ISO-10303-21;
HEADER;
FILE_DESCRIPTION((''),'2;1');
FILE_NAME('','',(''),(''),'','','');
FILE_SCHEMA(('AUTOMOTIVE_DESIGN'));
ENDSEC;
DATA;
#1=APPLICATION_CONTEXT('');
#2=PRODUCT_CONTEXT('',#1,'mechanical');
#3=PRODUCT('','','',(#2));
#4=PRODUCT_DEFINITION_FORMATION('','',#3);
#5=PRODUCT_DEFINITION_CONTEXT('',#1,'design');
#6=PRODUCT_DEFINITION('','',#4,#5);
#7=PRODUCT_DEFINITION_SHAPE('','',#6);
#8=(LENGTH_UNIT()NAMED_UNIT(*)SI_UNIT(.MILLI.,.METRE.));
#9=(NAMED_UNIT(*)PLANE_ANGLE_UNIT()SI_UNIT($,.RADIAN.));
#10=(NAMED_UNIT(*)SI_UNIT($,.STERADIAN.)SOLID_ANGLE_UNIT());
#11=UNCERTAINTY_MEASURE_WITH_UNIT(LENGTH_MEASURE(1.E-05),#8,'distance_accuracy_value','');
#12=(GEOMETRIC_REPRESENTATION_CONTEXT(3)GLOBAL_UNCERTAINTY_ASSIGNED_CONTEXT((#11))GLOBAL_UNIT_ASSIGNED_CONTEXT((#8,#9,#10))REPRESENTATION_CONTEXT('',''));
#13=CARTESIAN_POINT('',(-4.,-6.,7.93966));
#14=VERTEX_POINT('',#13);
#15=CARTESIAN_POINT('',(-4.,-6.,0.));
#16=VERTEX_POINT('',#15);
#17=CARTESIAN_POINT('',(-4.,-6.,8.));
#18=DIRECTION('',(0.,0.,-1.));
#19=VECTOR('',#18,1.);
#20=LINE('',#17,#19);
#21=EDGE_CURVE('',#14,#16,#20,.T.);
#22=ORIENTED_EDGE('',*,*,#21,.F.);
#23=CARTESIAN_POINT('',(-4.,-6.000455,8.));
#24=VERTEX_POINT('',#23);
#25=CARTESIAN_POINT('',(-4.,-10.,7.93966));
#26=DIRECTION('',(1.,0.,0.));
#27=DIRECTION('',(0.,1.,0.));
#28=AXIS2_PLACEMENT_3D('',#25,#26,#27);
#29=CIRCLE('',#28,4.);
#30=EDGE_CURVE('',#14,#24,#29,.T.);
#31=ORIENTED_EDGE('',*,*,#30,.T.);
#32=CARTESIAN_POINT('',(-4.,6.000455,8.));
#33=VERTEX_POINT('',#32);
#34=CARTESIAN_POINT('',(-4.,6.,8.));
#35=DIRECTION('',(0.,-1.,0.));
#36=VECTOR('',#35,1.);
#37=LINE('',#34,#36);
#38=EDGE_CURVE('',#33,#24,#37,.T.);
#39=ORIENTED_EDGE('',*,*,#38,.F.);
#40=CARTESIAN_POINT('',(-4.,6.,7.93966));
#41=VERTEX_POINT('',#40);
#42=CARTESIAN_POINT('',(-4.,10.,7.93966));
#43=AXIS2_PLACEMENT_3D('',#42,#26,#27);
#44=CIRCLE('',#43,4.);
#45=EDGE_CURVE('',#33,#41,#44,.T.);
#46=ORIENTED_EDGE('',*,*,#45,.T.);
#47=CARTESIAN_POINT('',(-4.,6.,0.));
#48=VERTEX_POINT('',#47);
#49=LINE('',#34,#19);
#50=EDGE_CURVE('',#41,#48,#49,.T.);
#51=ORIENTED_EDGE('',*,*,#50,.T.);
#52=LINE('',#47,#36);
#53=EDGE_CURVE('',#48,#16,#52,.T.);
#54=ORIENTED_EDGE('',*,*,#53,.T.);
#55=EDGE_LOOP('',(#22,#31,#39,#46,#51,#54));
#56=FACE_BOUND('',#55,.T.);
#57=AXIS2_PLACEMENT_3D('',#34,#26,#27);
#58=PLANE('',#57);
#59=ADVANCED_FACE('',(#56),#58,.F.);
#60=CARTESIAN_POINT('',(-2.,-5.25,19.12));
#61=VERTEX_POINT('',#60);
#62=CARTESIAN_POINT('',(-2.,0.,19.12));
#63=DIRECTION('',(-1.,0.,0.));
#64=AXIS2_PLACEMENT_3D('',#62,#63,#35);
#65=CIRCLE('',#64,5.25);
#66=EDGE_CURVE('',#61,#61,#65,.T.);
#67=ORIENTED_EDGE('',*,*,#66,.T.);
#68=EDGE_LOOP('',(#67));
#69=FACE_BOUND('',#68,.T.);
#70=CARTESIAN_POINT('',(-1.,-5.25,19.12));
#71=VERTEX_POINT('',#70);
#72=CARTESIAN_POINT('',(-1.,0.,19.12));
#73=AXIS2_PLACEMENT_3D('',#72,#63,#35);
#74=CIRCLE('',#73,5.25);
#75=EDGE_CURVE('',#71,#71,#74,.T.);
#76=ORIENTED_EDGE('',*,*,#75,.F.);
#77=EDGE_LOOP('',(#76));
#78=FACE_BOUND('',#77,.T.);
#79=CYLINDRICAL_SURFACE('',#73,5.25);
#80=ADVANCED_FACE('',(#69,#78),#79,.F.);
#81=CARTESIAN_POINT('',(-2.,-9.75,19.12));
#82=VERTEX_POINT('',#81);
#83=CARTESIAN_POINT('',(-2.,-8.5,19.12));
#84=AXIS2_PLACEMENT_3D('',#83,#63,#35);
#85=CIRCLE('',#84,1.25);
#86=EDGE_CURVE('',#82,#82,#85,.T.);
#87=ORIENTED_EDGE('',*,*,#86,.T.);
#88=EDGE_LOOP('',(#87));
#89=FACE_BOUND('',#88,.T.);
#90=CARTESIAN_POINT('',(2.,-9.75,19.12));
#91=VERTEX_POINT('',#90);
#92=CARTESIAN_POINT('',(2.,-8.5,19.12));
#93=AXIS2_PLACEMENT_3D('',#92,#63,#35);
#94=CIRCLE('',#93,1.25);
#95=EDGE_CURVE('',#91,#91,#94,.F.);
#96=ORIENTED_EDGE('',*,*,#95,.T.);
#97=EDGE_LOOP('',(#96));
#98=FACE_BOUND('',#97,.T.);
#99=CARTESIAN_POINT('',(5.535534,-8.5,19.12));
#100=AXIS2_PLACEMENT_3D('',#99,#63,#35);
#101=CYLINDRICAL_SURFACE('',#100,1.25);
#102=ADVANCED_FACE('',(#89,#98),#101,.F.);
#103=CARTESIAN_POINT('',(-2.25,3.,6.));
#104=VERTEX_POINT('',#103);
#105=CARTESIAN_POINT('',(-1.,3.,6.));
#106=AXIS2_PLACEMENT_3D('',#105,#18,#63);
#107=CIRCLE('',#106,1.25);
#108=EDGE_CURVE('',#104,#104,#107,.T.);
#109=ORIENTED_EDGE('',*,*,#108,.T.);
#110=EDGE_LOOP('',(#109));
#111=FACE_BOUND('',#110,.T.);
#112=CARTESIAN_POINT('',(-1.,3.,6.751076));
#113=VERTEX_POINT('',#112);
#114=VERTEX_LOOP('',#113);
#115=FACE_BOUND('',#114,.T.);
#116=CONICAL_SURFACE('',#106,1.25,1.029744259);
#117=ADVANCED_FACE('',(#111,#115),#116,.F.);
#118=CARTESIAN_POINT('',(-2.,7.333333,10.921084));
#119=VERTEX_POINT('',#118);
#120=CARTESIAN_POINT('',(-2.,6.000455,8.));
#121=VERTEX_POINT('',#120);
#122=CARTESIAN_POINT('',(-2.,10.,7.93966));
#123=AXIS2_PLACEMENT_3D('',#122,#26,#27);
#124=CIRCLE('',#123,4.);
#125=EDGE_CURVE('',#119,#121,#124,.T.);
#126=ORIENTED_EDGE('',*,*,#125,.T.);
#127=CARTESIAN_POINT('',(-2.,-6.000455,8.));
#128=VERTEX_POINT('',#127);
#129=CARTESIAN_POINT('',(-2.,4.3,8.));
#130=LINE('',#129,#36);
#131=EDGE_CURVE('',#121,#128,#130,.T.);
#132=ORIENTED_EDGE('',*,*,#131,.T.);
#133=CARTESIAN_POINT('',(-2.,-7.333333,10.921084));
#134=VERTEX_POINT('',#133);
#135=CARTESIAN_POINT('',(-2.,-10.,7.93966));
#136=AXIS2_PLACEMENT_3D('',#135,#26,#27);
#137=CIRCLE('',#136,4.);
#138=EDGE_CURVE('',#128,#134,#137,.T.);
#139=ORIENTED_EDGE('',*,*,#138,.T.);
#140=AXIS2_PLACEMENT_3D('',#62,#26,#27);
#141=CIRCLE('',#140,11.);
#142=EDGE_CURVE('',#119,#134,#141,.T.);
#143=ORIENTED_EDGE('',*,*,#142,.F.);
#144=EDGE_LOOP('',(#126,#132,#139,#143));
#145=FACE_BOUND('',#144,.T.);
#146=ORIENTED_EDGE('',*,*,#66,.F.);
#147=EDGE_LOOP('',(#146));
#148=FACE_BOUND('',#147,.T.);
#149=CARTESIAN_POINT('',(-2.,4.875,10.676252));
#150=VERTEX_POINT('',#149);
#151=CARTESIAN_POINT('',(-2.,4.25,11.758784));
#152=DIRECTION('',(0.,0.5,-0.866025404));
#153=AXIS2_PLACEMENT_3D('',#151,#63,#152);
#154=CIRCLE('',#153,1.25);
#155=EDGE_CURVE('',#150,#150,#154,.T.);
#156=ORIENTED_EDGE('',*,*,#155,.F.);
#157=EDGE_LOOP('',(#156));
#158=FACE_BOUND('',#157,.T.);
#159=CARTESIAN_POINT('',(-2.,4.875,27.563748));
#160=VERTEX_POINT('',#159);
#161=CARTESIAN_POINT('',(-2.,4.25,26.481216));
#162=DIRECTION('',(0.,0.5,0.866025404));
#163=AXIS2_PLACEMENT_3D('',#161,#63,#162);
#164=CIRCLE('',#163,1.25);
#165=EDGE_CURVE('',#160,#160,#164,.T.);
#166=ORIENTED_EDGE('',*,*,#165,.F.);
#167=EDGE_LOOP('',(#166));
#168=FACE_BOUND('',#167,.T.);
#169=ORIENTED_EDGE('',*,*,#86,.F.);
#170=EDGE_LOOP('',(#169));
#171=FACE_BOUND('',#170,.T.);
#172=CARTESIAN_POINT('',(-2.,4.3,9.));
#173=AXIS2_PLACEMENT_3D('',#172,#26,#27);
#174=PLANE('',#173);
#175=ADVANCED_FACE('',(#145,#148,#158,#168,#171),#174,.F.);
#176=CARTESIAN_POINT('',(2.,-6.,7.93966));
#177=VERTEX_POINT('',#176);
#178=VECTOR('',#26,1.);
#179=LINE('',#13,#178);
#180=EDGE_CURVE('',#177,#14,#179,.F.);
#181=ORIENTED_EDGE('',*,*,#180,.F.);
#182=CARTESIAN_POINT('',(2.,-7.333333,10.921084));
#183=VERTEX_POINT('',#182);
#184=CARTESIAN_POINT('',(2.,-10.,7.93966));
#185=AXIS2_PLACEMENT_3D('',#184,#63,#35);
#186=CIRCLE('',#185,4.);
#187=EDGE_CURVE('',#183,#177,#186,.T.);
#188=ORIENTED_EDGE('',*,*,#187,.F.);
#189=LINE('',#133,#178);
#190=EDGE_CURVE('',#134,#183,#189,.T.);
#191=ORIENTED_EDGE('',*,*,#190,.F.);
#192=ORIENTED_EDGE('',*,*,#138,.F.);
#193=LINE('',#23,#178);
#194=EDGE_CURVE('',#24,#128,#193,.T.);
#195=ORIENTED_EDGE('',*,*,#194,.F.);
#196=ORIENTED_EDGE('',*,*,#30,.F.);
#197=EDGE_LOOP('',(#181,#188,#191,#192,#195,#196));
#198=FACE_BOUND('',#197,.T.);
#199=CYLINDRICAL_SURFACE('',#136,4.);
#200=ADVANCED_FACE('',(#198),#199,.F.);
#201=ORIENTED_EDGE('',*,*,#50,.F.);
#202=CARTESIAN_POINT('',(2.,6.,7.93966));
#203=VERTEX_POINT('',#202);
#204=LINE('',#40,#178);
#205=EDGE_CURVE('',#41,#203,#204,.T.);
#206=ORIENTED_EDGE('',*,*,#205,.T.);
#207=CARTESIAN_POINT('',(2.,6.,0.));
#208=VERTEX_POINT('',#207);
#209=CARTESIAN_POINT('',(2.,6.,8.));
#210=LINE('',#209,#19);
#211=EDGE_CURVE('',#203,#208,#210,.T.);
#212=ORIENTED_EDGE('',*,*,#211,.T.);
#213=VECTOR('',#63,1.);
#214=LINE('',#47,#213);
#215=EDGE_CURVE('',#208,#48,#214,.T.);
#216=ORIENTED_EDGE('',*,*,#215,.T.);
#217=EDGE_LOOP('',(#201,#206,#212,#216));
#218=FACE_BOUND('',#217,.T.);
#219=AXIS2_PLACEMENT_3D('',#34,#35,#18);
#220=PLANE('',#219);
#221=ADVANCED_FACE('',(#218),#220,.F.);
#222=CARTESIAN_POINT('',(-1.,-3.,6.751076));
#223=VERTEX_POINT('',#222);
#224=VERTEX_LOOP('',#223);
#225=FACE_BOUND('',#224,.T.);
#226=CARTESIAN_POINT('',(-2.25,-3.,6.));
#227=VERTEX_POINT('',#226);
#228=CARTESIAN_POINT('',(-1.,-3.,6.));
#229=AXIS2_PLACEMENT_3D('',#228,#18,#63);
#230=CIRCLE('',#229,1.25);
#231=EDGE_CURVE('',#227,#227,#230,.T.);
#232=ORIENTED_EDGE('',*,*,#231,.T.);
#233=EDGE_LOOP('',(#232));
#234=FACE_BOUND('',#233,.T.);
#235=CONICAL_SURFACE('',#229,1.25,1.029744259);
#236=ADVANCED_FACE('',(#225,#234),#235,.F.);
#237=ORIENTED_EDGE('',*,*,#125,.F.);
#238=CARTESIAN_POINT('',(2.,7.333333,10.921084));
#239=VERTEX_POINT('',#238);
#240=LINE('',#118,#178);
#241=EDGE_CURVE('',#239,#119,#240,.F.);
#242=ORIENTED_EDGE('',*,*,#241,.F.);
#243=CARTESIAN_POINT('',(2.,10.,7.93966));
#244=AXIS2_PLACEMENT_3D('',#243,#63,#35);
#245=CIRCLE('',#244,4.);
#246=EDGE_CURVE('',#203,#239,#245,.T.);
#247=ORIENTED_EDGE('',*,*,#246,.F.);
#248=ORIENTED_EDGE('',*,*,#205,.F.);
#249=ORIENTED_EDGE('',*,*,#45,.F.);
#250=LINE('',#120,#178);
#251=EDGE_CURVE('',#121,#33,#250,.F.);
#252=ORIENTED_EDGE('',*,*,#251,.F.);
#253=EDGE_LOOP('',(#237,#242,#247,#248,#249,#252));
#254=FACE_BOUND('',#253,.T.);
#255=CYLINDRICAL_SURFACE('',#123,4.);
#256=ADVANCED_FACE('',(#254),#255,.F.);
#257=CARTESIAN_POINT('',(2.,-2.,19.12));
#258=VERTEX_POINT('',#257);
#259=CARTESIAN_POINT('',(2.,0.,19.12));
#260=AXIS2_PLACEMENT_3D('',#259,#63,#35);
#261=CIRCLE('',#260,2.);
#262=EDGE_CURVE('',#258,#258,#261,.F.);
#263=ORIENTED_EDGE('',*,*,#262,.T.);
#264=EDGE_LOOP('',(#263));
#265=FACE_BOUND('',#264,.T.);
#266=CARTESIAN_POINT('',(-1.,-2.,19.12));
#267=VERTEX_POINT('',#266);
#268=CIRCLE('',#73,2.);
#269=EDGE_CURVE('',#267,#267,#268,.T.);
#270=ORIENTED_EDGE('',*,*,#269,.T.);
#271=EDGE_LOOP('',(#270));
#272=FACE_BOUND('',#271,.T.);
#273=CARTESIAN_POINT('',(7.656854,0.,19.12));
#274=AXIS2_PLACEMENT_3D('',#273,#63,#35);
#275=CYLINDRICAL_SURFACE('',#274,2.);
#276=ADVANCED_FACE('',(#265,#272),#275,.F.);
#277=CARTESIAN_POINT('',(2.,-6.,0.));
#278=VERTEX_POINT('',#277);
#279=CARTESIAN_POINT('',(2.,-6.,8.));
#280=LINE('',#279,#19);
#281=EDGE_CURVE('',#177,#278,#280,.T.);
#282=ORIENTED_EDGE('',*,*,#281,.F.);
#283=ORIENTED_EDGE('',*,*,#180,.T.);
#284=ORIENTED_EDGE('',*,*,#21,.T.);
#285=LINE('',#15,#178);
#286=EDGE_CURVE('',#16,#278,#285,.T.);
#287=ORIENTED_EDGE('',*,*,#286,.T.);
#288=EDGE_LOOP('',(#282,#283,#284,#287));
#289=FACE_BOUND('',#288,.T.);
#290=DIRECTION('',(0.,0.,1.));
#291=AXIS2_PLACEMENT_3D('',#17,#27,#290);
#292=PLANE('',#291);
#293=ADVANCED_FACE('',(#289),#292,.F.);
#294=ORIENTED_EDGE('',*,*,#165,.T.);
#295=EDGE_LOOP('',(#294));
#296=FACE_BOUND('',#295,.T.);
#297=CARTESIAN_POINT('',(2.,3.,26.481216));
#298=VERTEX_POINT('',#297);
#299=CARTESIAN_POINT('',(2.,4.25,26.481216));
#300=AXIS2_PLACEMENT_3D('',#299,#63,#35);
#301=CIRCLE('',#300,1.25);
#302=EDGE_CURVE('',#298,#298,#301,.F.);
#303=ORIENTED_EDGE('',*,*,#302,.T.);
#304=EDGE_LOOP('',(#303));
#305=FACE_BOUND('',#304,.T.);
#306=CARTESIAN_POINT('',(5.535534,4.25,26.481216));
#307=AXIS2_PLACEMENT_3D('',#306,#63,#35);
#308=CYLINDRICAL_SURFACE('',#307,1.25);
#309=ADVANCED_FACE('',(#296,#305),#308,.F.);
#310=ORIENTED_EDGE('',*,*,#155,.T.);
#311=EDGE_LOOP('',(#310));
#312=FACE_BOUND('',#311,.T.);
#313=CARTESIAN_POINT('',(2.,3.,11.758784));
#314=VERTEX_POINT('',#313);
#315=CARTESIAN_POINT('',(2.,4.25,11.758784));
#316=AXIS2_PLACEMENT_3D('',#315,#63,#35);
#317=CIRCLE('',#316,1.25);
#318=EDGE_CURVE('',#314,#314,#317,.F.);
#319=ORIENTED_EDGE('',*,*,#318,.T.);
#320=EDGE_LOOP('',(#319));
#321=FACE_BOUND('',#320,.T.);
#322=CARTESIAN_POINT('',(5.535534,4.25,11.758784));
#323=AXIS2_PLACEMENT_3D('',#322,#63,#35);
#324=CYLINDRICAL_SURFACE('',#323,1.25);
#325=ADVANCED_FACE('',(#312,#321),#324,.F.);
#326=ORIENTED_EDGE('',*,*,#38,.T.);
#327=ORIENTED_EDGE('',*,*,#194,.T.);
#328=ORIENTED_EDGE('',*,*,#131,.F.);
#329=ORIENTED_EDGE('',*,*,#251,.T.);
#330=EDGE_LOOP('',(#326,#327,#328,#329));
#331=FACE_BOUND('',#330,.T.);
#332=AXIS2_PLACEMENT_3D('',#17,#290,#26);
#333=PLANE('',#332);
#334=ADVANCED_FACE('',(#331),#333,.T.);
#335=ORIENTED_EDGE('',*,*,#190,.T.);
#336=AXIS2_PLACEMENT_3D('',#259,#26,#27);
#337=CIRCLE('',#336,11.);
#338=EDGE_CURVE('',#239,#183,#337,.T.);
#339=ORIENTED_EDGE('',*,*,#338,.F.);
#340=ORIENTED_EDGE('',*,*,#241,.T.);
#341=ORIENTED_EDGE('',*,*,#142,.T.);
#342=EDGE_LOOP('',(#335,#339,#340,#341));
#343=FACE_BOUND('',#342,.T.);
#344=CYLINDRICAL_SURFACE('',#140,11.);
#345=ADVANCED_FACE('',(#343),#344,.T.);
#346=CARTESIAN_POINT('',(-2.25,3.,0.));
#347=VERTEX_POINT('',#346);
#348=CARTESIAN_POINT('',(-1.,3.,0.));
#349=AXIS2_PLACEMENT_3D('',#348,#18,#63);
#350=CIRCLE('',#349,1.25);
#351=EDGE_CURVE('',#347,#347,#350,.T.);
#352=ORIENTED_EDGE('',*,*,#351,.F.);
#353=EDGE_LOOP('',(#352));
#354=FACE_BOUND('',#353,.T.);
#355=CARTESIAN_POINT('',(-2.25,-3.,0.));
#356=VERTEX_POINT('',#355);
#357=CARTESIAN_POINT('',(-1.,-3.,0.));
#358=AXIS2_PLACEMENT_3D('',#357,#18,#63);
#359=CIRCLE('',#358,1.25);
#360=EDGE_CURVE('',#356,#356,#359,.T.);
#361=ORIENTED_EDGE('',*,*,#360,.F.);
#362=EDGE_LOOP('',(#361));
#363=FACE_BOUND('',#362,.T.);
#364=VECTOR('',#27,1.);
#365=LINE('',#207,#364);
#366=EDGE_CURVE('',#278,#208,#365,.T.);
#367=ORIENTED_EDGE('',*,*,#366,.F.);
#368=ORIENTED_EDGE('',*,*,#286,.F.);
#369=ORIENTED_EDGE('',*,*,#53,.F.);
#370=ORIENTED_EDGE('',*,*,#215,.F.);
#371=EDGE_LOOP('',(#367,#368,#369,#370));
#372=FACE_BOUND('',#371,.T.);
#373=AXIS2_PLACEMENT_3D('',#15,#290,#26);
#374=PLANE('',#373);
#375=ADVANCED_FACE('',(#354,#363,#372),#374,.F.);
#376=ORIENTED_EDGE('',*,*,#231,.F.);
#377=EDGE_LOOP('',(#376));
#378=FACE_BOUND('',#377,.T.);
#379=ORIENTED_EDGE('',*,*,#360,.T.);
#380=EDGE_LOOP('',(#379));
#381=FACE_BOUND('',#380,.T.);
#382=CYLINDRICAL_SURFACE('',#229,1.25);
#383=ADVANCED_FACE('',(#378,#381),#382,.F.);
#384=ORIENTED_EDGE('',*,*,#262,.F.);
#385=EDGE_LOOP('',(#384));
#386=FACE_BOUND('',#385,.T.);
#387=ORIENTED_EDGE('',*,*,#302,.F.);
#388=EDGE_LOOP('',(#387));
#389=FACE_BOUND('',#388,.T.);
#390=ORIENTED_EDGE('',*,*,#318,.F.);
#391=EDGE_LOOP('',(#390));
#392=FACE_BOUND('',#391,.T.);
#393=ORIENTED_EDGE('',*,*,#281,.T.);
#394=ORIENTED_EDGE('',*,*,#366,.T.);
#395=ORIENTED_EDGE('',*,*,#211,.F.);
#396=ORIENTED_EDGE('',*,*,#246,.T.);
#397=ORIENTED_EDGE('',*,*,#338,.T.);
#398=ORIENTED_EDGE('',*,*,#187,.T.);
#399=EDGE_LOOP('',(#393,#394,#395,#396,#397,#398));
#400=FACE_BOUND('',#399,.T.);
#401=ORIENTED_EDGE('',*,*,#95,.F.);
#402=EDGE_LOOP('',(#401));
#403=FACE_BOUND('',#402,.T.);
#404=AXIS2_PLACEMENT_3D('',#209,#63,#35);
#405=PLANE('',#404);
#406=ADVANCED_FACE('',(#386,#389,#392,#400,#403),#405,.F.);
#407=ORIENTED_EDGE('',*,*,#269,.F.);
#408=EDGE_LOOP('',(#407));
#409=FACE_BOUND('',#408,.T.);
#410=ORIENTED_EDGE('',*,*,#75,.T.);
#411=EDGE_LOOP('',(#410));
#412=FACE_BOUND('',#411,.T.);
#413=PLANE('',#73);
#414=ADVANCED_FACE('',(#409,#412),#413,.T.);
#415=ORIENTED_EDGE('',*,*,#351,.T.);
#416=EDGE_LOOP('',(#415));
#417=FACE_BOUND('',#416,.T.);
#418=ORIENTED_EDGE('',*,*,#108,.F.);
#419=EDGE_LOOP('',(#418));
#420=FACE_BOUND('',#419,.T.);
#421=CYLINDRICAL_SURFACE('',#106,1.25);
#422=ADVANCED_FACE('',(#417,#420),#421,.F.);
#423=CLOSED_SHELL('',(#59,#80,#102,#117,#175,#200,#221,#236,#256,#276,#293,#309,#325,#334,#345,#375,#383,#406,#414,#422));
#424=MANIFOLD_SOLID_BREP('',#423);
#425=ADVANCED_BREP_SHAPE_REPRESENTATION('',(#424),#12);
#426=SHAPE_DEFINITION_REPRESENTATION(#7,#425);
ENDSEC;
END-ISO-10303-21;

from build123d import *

# Parameters (mm, degrees)
SKETCH1_W             = 6
SKETCH1_H             = 12
EXTRUDE1_DEPTH        = 8
SKETCH3_W             = 4
SKETCH3_H             = 8.6
EXTRUDE2_DEPTH        = 1
SKETCH2_R             = 1.25
EXTRUDE3_DEPTH        = 6
EXTRUDE4_DEPTH        = 4
SKETCH6_R             = 5.25
EXTRUDE5_DEPTH        = 1
SKETCH7_R             = 1.25
EXTRUDE6_DEPTH        = 4
CIRPATTERN1_COUNT     = 3
SKETCH8_R             = 2
EXTRUDE7_DEPTH        = 3
FILLET1_R             = 4
M3_TAPPED_HOLE1_D     = 2.5
M3_TAPPED_HOLE1_DEPTH = 6
M3_TAPPED_HOLE1_TIP   = 0.751075774


with BuildPart() as part:
    # Sketch1 → Extrude1 (new body)
    with BuildSketch(Plane.XY):
        with Locations((-1, 0)):
            Rectangle(SKETCH1_W, SKETCH1_H)
    extrude(amount=EXTRUDE1_DEPTH)

    # Sketch3 → Extrude2 (add)
    with BuildSketch(Plane.XY.offset(8)):
        Rectangle(SKETCH3_W, SKETCH3_H)
    extrude(amount=EXTRUDE2_DEPTH)

    # Sketch2 → Extrude3 (cut)
    with BuildSketch(Plane(origin=(0, 0, 0), x_dir=(-1, 0, 0), z_dir=(0, 0, -1))):
        with Locations((1, 3)):
            Circle(SKETCH2_R)
        with Locations((1, -3)):
            Circle(SKETCH2_R)
    extrude(amount=-EXTRUDE3_DEPTH, mode=Mode.SUBTRACT)

    # Sketch4 → Extrude4 (add)
    with BuildSketch(Plane(origin=(2, 0, 0), x_dir=(0, 0, -1), z_dir=(1, 0, 0))):
        with BuildLine():
            Line((-9.900455543, 6), (-8, 6))
            Line((-8, 6), (-8, -6))
            Line((-8, -6), (-9.900455543, -6))
            ThreePointArc((-9.900455543, -6), (-30.12, 0), (-9.900455543, 6))
        make_face()
    extrude(amount=-EXTRUDE4_DEPTH)

    # Sketch6 → Extrude5 (cut)
    with BuildSketch(Plane.ZY.offset(2)):
        with Locations(Location((19.12, 0, 0), (0, 0, 270))):
            Circle(SKETCH6_R)
    extrude(amount=-EXTRUDE5_DEPTH, mode=Mode.SUBTRACT)

    # Sketch7 → Extrude6 (cut)
    with BuildSketch(Plane.ZY.offset(2)):
        with Locations(Location((19.12, -8.5, 0), (0, 0, 270))):
            Circle(SKETCH7_R)
    extrude6 = extrude(amount=-EXTRUDE6_DEPTH, mode=Mode.SUBTRACT)

    # CirPattern1: Extrude6 ×3 about axis
    cirpattern1_axis = Axis((0, 0, 19.12), (1, 0, 0))
    for i in range(1, CIRPATTERN1_COUNT):
        add(extrude6.rotate(cirpattern1_axis, i * 360 / CIRPATTERN1_COUNT), mode=Mode.SUBTRACT)

    # Sketch8 → Extrude7 (cut)
    with BuildSketch(Plane.ZY.offset(1)):
        with Locations(Location((19.12, 0, 0), (0, 0, 270))):
            Circle(SKETCH8_R)
    extrude(amount=-EXTRUDE7_DEPTH, mode=Mode.SUBTRACT)

    # Fillet1
    # the kernel refuses this fillet: 4 mm, written as the material it adds along each edge
    with BuildSketch(Plane(origin=(2, 6, 9.900455543), x_dir=(0, 0, -1), z_dir=(-1, 0, 0))) as fillet1_piece_1_section:
        with BuildLine():
            CenterArc((1.96079543, -4), FILLET1_R, 90, 48.189685104)
            ThreePointArc((-1.02062854, -1.333333333), (-0.484835824, -0.686169688), (0, 0))
            Line((0, 0), (1.96079543, 0))
        make_face()
    fillet1_piece_1 = extrude(amount=4, mode=Mode.PRIVATE)
    fillet1_piece_1 = split(fillet1_piece_1, bisect_by=Plane(origin=(0, 5.96007597, 8), z_dir=(0, 0, -1)), keep=Keep.TOP, mode=Mode.PRIVATE)
    add(fillet1_piece_1)
    with BuildSketch(Plane(origin=(2, 6, 9.900455543), x_dir=(0, 0, -1), z_dir=(-1, 0, 0))) as fillet1_piece_2_section:
        with BuildLine():
            CenterArc((1.96079543, -4), FILLET1_R, 90, 48.189685104)
            ThreePointArc((-1.02062854, -1.333333333), (-0.484835824, -0.686169688), (0, 0))
            Line((0, 0), (1.96079543, 0))
        make_face()
    fillet1_piece_2 = extrude(amount=4, mode=Mode.PRIVATE)
    fillet1_piece_2 = split(fillet1_piece_2, bisect_by=Plane(origin=(0, 6.284176822, 8), z_dir=(0, 0, 1)), keep=Keep.TOP, mode=Mode.PRIVATE)
    add(fillet1_piece_2)
    with BuildSketch(Plane(origin=(2, 6, 9.900455543), x_dir=(0, 0, -1), z_dir=(-1, 0, 0))) as fillet1_piece_3_section:
        with BuildLine():
            CenterArc((1.96079543, -4), FILLET1_R, 90, 48.189685104)
            ThreePointArc((-1.02062854, -1.333333333), (-0.484835824, -0.686169688), (0, 0))
            Line((0, 0), (1.96079543, 0))
        make_face()
    fillet1_piece_3 = extrude(amount=8.901988576, mode=Mode.PRIVATE)
    fillet1_piece_3 = split(fillet1_piece_3, bisect_by=Plane(origin=(-4, 5.96007597, 7.969858609), z_dir=(1, 0, 0)), keep=Keep.TOP, mode=Mode.PRIVATE)
    fillet1_piece_3 = split(fillet1_piece_3, bisect_by=Plane(origin=(-3, 5.96007597, 8), z_dir=(0, 0, -1)), keep=Keep.TOP, mode=Mode.PRIVATE)
    fillet1_piece_3 = split(fillet1_piece_3, bisect_by=Plane(origin=(-2, 5.96007597, 7.969858609), z_dir=(-1, 0, 0)), keep=Keep.TOP, mode=Mode.PRIVATE)
    add(fillet1_piece_3)
    with BuildSketch(Plane(origin=(2, -6, 9.900455543), x_dir=(0, -0.794064421171895, 0.6078336080120474), z_dir=(-1, 0, 0))) as fillet1_piece_4_section:
        with BuildLine():
            CenterArc((1.984420324, -3.98833232), FILLET1_R, 94.377291872, 48.189685104)
            Line((-1.191837361, -1.556997888), (0, 0))
            ThreePointArc((0, 0), (0.839562445, -0.032086119), (1.679124889, 0))
        make_face()
    fillet1_piece_4 = extrude(amount=4, mode=Mode.PRIVATE)
    fillet1_piece_4 = split(fillet1_piece_4, bisect_by=Plane(origin=(0, -6.284176822, 8), z_dir=(0, 0, 1)), keep=Keep.TOP, mode=Mode.PRIVATE)
    add(fillet1_piece_4)
    with BuildSketch(Plane(origin=(2, -6, 9.900455543), x_dir=(0, -0.794064421171895, 0.6078336080120474), z_dir=(-1, 0, 0))) as fillet1_piece_5_section:
        with BuildLine():
            CenterArc((1.984420324, -3.98833232), FILLET1_R, 94.377291872, 48.189685104)
            Line((-1.191837361, -1.556997888), (0, 0))
            ThreePointArc((0, 0), (0.839562445, -0.032086119), (1.679124889, 0))
        make_face()
    fillet1_piece_5 = extrude(amount=4, mode=Mode.PRIVATE)
    fillet1_piece_5 = split(fillet1_piece_5, bisect_by=Plane(origin=(0, -5.96007597, 8), z_dir=(0, 0, -1)), keep=Keep.TOP, mode=Mode.PRIVATE)
    add(fillet1_piece_5)
    with BuildSketch(Plane(origin=(2, -6, 9.900455543), x_dir=(0, -0.794064421171895, 0.6078336080120474), z_dir=(-1, 0, 0))) as fillet1_piece_6_section:
        with BuildLine():
            CenterArc((1.984420324, -3.98833232), FILLET1_R, 94.377291872, 48.189685104)
            Line((-1.191837361, -1.556997888), (0, 0))
            ThreePointArc((0, 0), (0.839562445, -0.032086119), (1.679124889, 0))
        make_face()
    fillet1_piece_6 = extrude(amount=8.901988576, mode=Mode.PRIVATE)
    fillet1_piece_6 = split(fillet1_piece_6, bisect_by=Plane(origin=(-4, -5.96007597, 7.969858609), z_dir=(1, 0, 0)), keep=Keep.TOP, mode=Mode.PRIVATE)
    fillet1_piece_6 = split(fillet1_piece_6, bisect_by=Plane(origin=(-3, -5.96007597, 8), z_dir=(0, 0, -1)), keep=Keep.TOP, mode=Mode.PRIVATE)
    fillet1_piece_6 = split(fillet1_piece_6, bisect_by=Plane(origin=(-2, -5.96007597, 7.969858609), z_dir=(-1, 0, 0)), keep=Keep.TOP, mode=Mode.PRIVATE)
    add(fillet1_piece_6)

    # M3 Tapped Hole1
    with Locations(Plane(origin=(-1, 3, 0), x_dir=(-1, 0, 0), z_dir=(0, 0, -1))):
        with Locations((0, 0), (0, -6)):
            Hole(M3_TAPPED_HOLE1_D / 2, depth=M3_TAPPED_HOLE1_DEPTH)
            with Locations((0, 0, -(M3_TAPPED_HOLE1_DEPTH + M3_TAPPED_HOLE1_TIP / 2))):  # 118° drill point
                Cone(0, M3_TAPPED_HOLE1_D / 2, M3_TAPPED_HOLE1_TIP, mode=Mode.SUBTRACT)


solid = part.part
